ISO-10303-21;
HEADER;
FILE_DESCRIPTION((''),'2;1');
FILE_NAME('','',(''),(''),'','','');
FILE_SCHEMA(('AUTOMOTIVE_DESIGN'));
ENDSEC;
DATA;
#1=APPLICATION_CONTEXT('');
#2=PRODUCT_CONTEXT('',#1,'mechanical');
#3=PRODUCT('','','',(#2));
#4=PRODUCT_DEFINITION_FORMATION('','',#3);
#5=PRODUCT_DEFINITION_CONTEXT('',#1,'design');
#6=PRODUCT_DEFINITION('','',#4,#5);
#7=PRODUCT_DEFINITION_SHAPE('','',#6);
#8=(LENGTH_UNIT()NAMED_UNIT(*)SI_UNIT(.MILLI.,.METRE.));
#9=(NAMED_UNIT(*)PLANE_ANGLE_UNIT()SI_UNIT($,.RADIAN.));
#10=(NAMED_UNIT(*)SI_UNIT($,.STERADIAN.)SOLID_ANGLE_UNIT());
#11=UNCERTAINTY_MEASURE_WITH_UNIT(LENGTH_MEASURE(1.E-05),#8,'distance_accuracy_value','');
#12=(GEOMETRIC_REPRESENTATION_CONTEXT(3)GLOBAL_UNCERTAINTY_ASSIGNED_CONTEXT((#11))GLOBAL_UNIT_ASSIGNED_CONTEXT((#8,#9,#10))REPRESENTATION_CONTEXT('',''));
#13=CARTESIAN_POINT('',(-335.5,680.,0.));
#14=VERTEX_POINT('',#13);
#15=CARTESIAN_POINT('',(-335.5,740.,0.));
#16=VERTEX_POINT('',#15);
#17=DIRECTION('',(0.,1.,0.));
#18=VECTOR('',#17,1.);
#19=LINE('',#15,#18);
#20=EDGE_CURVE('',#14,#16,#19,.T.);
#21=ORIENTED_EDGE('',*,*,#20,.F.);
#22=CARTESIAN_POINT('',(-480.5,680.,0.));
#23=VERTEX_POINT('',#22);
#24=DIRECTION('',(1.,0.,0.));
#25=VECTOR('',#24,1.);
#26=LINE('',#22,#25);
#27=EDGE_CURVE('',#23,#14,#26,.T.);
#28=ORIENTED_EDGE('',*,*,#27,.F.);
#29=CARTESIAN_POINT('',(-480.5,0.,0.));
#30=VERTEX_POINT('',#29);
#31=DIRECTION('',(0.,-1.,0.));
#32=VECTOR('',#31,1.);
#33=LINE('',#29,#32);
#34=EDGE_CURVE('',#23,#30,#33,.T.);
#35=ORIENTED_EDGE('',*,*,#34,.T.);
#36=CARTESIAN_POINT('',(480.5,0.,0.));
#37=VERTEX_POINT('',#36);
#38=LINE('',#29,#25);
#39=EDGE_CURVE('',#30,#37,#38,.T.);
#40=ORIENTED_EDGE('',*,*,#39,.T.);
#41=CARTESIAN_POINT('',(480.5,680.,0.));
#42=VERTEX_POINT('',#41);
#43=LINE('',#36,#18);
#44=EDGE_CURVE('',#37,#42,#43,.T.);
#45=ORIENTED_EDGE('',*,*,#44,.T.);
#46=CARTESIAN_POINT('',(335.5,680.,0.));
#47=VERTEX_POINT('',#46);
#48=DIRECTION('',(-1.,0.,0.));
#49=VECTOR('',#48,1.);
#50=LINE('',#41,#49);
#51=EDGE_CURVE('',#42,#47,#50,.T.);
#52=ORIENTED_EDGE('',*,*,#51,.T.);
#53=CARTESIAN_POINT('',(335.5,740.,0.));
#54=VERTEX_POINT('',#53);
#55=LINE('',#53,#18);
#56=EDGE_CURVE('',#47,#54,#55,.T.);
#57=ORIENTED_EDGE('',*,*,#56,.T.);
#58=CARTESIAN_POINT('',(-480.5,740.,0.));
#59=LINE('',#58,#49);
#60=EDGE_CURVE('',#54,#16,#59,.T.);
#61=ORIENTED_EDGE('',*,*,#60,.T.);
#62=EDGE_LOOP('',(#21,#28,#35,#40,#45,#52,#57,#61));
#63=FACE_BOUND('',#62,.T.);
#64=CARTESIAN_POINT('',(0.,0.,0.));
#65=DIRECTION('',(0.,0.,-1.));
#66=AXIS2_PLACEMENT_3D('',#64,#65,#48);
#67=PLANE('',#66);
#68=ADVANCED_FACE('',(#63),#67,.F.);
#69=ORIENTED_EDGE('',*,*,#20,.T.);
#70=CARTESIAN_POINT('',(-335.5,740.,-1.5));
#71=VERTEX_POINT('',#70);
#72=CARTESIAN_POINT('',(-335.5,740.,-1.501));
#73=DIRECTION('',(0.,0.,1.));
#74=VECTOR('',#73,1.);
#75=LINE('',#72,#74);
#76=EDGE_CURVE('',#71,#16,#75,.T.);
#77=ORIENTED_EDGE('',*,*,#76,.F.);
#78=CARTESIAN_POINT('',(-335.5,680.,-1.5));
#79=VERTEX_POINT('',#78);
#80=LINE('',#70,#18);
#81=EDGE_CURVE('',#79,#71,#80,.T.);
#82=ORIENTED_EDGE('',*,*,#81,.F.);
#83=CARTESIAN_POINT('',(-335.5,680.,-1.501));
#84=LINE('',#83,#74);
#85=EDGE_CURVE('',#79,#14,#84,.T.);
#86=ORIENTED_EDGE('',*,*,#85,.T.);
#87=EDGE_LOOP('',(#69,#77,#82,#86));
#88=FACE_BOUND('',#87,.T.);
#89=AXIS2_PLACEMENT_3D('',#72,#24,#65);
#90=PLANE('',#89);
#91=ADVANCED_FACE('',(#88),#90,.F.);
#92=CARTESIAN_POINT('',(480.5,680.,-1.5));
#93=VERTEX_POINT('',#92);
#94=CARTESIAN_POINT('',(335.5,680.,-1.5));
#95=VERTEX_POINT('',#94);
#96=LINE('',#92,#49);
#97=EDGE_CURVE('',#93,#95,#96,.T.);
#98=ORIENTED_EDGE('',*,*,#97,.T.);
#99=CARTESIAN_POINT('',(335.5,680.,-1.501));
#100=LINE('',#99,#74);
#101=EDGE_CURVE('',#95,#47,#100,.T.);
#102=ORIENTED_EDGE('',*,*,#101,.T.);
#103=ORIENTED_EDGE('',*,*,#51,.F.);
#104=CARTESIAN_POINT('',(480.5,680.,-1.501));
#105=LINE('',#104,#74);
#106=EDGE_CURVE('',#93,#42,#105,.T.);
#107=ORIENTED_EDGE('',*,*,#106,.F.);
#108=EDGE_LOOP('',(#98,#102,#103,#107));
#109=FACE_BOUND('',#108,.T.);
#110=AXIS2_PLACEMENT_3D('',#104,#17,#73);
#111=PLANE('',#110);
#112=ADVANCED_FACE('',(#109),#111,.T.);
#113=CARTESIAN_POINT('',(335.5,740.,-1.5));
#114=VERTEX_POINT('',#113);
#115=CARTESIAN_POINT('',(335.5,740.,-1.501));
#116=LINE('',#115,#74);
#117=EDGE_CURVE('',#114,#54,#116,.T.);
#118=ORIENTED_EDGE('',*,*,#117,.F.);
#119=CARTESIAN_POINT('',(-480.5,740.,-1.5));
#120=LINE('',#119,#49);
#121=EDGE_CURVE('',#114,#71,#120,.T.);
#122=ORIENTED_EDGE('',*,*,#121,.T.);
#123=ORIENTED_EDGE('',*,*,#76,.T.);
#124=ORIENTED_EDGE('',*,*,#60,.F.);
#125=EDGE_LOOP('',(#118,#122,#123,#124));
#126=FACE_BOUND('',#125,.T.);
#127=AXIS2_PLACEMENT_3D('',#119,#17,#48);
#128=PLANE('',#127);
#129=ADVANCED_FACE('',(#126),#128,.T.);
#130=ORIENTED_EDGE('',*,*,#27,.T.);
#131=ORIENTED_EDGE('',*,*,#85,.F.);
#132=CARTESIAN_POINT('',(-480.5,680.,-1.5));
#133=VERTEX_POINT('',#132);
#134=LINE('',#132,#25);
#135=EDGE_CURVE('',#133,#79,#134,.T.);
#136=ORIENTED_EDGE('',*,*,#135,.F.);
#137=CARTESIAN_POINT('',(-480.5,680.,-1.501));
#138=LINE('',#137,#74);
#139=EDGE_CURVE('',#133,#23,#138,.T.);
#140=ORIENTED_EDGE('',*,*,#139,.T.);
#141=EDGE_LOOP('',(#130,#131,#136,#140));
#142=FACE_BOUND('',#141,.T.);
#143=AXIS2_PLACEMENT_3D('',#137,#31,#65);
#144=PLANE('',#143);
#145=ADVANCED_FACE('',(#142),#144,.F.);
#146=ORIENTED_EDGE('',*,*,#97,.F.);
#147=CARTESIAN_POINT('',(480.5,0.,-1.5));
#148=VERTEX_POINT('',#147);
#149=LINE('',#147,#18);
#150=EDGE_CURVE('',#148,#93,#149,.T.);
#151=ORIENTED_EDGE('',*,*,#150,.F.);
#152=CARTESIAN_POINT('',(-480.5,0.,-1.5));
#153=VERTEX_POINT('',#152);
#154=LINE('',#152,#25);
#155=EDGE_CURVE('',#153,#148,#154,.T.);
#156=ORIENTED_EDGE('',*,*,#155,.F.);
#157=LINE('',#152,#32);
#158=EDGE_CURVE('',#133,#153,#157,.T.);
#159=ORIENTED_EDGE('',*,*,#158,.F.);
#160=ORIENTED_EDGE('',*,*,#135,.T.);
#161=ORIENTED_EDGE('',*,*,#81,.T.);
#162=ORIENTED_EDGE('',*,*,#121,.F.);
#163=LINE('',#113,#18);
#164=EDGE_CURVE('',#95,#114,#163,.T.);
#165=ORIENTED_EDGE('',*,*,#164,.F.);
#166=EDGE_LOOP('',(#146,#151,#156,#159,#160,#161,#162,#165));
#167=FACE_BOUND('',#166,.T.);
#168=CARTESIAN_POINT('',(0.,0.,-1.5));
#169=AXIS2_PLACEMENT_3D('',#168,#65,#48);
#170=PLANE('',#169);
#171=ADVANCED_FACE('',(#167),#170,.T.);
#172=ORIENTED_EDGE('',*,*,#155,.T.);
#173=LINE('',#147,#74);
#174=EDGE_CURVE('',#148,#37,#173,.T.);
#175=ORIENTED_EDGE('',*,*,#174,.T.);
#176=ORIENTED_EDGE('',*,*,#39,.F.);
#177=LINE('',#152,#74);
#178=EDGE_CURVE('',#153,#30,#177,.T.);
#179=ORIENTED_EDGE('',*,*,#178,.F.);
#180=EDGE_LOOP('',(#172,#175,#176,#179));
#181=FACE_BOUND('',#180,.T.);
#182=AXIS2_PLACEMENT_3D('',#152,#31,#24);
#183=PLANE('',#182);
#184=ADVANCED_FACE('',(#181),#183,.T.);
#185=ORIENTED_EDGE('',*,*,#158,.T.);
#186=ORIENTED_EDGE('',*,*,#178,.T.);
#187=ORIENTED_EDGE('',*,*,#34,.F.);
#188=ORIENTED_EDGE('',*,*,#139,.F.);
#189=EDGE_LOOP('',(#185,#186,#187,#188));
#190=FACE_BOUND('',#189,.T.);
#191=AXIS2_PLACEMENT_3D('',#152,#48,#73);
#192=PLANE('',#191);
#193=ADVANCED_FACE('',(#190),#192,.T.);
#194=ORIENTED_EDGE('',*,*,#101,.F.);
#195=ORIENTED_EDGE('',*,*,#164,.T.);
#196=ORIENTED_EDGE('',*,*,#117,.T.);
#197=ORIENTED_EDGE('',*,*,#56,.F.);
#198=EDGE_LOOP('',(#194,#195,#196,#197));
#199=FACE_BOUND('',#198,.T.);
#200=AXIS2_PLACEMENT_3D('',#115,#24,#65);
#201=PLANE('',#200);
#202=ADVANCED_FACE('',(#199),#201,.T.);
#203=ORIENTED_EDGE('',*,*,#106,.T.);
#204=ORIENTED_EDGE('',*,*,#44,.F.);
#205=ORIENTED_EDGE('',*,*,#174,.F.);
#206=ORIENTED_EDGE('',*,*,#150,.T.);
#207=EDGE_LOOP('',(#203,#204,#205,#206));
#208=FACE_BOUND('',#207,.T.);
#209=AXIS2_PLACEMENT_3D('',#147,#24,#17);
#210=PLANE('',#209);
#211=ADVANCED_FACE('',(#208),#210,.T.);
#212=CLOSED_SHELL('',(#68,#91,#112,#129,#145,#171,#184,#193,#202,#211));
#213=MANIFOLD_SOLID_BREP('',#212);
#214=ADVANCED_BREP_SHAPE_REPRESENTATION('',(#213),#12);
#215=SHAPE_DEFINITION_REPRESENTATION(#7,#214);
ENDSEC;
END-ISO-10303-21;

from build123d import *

# Parameters (mm, degrees)
SKETCH1_W          = 961
SKETCH1_H          = 740
BASE_FLANGE1_DEPTH = 1.5
CUT_EXTRUDE1_REACH = 884.317
SKETCH2_W          = 145
SKETCH2_H          = 60


# Sheet-metal steps are written as plain solids
with BuildPart() as part:
    # Sketch1 → Base-Flange1 (new body)
    with BuildSketch(Plane.XY):
        with Locations((0, 370)):
            Rectangle(SKETCH1_W, SKETCH1_H)
    extrude(amount=-BASE_FLANGE1_DEPTH)

    # Sketch2 → Cut-Extrude1 (cut, up to next)
    with BuildSketch(Plane.XY, mode=Mode.PRIVATE) as cut_extrude1_sk1:
        with Locations((-408, 710)):
            Rectangle(SKETCH2_W, SKETCH2_H)
    cut_extrude1_tool1 = extrude(cut_extrude1_sk1.sketch, amount=-CUT_EXTRUDE1_REACH, mode=Mode.PRIVATE) & part.part
    cut_extrude1 = cut_extrude1_tool1.solids().sort_by_distance((-408, 710, 0))[0]
    add(cut_extrude1, mode=Mode.SUBTRACT)

    # Mirror1: Cut-Extrude1 across plane
    add(cut_extrude1.mirror(Plane(origin=(0, 0, 0), x_dir=(0, 0, 1), z_dir=(1, 0, 0))), mode=Mode.SUBTRACT)


solid = part.part
